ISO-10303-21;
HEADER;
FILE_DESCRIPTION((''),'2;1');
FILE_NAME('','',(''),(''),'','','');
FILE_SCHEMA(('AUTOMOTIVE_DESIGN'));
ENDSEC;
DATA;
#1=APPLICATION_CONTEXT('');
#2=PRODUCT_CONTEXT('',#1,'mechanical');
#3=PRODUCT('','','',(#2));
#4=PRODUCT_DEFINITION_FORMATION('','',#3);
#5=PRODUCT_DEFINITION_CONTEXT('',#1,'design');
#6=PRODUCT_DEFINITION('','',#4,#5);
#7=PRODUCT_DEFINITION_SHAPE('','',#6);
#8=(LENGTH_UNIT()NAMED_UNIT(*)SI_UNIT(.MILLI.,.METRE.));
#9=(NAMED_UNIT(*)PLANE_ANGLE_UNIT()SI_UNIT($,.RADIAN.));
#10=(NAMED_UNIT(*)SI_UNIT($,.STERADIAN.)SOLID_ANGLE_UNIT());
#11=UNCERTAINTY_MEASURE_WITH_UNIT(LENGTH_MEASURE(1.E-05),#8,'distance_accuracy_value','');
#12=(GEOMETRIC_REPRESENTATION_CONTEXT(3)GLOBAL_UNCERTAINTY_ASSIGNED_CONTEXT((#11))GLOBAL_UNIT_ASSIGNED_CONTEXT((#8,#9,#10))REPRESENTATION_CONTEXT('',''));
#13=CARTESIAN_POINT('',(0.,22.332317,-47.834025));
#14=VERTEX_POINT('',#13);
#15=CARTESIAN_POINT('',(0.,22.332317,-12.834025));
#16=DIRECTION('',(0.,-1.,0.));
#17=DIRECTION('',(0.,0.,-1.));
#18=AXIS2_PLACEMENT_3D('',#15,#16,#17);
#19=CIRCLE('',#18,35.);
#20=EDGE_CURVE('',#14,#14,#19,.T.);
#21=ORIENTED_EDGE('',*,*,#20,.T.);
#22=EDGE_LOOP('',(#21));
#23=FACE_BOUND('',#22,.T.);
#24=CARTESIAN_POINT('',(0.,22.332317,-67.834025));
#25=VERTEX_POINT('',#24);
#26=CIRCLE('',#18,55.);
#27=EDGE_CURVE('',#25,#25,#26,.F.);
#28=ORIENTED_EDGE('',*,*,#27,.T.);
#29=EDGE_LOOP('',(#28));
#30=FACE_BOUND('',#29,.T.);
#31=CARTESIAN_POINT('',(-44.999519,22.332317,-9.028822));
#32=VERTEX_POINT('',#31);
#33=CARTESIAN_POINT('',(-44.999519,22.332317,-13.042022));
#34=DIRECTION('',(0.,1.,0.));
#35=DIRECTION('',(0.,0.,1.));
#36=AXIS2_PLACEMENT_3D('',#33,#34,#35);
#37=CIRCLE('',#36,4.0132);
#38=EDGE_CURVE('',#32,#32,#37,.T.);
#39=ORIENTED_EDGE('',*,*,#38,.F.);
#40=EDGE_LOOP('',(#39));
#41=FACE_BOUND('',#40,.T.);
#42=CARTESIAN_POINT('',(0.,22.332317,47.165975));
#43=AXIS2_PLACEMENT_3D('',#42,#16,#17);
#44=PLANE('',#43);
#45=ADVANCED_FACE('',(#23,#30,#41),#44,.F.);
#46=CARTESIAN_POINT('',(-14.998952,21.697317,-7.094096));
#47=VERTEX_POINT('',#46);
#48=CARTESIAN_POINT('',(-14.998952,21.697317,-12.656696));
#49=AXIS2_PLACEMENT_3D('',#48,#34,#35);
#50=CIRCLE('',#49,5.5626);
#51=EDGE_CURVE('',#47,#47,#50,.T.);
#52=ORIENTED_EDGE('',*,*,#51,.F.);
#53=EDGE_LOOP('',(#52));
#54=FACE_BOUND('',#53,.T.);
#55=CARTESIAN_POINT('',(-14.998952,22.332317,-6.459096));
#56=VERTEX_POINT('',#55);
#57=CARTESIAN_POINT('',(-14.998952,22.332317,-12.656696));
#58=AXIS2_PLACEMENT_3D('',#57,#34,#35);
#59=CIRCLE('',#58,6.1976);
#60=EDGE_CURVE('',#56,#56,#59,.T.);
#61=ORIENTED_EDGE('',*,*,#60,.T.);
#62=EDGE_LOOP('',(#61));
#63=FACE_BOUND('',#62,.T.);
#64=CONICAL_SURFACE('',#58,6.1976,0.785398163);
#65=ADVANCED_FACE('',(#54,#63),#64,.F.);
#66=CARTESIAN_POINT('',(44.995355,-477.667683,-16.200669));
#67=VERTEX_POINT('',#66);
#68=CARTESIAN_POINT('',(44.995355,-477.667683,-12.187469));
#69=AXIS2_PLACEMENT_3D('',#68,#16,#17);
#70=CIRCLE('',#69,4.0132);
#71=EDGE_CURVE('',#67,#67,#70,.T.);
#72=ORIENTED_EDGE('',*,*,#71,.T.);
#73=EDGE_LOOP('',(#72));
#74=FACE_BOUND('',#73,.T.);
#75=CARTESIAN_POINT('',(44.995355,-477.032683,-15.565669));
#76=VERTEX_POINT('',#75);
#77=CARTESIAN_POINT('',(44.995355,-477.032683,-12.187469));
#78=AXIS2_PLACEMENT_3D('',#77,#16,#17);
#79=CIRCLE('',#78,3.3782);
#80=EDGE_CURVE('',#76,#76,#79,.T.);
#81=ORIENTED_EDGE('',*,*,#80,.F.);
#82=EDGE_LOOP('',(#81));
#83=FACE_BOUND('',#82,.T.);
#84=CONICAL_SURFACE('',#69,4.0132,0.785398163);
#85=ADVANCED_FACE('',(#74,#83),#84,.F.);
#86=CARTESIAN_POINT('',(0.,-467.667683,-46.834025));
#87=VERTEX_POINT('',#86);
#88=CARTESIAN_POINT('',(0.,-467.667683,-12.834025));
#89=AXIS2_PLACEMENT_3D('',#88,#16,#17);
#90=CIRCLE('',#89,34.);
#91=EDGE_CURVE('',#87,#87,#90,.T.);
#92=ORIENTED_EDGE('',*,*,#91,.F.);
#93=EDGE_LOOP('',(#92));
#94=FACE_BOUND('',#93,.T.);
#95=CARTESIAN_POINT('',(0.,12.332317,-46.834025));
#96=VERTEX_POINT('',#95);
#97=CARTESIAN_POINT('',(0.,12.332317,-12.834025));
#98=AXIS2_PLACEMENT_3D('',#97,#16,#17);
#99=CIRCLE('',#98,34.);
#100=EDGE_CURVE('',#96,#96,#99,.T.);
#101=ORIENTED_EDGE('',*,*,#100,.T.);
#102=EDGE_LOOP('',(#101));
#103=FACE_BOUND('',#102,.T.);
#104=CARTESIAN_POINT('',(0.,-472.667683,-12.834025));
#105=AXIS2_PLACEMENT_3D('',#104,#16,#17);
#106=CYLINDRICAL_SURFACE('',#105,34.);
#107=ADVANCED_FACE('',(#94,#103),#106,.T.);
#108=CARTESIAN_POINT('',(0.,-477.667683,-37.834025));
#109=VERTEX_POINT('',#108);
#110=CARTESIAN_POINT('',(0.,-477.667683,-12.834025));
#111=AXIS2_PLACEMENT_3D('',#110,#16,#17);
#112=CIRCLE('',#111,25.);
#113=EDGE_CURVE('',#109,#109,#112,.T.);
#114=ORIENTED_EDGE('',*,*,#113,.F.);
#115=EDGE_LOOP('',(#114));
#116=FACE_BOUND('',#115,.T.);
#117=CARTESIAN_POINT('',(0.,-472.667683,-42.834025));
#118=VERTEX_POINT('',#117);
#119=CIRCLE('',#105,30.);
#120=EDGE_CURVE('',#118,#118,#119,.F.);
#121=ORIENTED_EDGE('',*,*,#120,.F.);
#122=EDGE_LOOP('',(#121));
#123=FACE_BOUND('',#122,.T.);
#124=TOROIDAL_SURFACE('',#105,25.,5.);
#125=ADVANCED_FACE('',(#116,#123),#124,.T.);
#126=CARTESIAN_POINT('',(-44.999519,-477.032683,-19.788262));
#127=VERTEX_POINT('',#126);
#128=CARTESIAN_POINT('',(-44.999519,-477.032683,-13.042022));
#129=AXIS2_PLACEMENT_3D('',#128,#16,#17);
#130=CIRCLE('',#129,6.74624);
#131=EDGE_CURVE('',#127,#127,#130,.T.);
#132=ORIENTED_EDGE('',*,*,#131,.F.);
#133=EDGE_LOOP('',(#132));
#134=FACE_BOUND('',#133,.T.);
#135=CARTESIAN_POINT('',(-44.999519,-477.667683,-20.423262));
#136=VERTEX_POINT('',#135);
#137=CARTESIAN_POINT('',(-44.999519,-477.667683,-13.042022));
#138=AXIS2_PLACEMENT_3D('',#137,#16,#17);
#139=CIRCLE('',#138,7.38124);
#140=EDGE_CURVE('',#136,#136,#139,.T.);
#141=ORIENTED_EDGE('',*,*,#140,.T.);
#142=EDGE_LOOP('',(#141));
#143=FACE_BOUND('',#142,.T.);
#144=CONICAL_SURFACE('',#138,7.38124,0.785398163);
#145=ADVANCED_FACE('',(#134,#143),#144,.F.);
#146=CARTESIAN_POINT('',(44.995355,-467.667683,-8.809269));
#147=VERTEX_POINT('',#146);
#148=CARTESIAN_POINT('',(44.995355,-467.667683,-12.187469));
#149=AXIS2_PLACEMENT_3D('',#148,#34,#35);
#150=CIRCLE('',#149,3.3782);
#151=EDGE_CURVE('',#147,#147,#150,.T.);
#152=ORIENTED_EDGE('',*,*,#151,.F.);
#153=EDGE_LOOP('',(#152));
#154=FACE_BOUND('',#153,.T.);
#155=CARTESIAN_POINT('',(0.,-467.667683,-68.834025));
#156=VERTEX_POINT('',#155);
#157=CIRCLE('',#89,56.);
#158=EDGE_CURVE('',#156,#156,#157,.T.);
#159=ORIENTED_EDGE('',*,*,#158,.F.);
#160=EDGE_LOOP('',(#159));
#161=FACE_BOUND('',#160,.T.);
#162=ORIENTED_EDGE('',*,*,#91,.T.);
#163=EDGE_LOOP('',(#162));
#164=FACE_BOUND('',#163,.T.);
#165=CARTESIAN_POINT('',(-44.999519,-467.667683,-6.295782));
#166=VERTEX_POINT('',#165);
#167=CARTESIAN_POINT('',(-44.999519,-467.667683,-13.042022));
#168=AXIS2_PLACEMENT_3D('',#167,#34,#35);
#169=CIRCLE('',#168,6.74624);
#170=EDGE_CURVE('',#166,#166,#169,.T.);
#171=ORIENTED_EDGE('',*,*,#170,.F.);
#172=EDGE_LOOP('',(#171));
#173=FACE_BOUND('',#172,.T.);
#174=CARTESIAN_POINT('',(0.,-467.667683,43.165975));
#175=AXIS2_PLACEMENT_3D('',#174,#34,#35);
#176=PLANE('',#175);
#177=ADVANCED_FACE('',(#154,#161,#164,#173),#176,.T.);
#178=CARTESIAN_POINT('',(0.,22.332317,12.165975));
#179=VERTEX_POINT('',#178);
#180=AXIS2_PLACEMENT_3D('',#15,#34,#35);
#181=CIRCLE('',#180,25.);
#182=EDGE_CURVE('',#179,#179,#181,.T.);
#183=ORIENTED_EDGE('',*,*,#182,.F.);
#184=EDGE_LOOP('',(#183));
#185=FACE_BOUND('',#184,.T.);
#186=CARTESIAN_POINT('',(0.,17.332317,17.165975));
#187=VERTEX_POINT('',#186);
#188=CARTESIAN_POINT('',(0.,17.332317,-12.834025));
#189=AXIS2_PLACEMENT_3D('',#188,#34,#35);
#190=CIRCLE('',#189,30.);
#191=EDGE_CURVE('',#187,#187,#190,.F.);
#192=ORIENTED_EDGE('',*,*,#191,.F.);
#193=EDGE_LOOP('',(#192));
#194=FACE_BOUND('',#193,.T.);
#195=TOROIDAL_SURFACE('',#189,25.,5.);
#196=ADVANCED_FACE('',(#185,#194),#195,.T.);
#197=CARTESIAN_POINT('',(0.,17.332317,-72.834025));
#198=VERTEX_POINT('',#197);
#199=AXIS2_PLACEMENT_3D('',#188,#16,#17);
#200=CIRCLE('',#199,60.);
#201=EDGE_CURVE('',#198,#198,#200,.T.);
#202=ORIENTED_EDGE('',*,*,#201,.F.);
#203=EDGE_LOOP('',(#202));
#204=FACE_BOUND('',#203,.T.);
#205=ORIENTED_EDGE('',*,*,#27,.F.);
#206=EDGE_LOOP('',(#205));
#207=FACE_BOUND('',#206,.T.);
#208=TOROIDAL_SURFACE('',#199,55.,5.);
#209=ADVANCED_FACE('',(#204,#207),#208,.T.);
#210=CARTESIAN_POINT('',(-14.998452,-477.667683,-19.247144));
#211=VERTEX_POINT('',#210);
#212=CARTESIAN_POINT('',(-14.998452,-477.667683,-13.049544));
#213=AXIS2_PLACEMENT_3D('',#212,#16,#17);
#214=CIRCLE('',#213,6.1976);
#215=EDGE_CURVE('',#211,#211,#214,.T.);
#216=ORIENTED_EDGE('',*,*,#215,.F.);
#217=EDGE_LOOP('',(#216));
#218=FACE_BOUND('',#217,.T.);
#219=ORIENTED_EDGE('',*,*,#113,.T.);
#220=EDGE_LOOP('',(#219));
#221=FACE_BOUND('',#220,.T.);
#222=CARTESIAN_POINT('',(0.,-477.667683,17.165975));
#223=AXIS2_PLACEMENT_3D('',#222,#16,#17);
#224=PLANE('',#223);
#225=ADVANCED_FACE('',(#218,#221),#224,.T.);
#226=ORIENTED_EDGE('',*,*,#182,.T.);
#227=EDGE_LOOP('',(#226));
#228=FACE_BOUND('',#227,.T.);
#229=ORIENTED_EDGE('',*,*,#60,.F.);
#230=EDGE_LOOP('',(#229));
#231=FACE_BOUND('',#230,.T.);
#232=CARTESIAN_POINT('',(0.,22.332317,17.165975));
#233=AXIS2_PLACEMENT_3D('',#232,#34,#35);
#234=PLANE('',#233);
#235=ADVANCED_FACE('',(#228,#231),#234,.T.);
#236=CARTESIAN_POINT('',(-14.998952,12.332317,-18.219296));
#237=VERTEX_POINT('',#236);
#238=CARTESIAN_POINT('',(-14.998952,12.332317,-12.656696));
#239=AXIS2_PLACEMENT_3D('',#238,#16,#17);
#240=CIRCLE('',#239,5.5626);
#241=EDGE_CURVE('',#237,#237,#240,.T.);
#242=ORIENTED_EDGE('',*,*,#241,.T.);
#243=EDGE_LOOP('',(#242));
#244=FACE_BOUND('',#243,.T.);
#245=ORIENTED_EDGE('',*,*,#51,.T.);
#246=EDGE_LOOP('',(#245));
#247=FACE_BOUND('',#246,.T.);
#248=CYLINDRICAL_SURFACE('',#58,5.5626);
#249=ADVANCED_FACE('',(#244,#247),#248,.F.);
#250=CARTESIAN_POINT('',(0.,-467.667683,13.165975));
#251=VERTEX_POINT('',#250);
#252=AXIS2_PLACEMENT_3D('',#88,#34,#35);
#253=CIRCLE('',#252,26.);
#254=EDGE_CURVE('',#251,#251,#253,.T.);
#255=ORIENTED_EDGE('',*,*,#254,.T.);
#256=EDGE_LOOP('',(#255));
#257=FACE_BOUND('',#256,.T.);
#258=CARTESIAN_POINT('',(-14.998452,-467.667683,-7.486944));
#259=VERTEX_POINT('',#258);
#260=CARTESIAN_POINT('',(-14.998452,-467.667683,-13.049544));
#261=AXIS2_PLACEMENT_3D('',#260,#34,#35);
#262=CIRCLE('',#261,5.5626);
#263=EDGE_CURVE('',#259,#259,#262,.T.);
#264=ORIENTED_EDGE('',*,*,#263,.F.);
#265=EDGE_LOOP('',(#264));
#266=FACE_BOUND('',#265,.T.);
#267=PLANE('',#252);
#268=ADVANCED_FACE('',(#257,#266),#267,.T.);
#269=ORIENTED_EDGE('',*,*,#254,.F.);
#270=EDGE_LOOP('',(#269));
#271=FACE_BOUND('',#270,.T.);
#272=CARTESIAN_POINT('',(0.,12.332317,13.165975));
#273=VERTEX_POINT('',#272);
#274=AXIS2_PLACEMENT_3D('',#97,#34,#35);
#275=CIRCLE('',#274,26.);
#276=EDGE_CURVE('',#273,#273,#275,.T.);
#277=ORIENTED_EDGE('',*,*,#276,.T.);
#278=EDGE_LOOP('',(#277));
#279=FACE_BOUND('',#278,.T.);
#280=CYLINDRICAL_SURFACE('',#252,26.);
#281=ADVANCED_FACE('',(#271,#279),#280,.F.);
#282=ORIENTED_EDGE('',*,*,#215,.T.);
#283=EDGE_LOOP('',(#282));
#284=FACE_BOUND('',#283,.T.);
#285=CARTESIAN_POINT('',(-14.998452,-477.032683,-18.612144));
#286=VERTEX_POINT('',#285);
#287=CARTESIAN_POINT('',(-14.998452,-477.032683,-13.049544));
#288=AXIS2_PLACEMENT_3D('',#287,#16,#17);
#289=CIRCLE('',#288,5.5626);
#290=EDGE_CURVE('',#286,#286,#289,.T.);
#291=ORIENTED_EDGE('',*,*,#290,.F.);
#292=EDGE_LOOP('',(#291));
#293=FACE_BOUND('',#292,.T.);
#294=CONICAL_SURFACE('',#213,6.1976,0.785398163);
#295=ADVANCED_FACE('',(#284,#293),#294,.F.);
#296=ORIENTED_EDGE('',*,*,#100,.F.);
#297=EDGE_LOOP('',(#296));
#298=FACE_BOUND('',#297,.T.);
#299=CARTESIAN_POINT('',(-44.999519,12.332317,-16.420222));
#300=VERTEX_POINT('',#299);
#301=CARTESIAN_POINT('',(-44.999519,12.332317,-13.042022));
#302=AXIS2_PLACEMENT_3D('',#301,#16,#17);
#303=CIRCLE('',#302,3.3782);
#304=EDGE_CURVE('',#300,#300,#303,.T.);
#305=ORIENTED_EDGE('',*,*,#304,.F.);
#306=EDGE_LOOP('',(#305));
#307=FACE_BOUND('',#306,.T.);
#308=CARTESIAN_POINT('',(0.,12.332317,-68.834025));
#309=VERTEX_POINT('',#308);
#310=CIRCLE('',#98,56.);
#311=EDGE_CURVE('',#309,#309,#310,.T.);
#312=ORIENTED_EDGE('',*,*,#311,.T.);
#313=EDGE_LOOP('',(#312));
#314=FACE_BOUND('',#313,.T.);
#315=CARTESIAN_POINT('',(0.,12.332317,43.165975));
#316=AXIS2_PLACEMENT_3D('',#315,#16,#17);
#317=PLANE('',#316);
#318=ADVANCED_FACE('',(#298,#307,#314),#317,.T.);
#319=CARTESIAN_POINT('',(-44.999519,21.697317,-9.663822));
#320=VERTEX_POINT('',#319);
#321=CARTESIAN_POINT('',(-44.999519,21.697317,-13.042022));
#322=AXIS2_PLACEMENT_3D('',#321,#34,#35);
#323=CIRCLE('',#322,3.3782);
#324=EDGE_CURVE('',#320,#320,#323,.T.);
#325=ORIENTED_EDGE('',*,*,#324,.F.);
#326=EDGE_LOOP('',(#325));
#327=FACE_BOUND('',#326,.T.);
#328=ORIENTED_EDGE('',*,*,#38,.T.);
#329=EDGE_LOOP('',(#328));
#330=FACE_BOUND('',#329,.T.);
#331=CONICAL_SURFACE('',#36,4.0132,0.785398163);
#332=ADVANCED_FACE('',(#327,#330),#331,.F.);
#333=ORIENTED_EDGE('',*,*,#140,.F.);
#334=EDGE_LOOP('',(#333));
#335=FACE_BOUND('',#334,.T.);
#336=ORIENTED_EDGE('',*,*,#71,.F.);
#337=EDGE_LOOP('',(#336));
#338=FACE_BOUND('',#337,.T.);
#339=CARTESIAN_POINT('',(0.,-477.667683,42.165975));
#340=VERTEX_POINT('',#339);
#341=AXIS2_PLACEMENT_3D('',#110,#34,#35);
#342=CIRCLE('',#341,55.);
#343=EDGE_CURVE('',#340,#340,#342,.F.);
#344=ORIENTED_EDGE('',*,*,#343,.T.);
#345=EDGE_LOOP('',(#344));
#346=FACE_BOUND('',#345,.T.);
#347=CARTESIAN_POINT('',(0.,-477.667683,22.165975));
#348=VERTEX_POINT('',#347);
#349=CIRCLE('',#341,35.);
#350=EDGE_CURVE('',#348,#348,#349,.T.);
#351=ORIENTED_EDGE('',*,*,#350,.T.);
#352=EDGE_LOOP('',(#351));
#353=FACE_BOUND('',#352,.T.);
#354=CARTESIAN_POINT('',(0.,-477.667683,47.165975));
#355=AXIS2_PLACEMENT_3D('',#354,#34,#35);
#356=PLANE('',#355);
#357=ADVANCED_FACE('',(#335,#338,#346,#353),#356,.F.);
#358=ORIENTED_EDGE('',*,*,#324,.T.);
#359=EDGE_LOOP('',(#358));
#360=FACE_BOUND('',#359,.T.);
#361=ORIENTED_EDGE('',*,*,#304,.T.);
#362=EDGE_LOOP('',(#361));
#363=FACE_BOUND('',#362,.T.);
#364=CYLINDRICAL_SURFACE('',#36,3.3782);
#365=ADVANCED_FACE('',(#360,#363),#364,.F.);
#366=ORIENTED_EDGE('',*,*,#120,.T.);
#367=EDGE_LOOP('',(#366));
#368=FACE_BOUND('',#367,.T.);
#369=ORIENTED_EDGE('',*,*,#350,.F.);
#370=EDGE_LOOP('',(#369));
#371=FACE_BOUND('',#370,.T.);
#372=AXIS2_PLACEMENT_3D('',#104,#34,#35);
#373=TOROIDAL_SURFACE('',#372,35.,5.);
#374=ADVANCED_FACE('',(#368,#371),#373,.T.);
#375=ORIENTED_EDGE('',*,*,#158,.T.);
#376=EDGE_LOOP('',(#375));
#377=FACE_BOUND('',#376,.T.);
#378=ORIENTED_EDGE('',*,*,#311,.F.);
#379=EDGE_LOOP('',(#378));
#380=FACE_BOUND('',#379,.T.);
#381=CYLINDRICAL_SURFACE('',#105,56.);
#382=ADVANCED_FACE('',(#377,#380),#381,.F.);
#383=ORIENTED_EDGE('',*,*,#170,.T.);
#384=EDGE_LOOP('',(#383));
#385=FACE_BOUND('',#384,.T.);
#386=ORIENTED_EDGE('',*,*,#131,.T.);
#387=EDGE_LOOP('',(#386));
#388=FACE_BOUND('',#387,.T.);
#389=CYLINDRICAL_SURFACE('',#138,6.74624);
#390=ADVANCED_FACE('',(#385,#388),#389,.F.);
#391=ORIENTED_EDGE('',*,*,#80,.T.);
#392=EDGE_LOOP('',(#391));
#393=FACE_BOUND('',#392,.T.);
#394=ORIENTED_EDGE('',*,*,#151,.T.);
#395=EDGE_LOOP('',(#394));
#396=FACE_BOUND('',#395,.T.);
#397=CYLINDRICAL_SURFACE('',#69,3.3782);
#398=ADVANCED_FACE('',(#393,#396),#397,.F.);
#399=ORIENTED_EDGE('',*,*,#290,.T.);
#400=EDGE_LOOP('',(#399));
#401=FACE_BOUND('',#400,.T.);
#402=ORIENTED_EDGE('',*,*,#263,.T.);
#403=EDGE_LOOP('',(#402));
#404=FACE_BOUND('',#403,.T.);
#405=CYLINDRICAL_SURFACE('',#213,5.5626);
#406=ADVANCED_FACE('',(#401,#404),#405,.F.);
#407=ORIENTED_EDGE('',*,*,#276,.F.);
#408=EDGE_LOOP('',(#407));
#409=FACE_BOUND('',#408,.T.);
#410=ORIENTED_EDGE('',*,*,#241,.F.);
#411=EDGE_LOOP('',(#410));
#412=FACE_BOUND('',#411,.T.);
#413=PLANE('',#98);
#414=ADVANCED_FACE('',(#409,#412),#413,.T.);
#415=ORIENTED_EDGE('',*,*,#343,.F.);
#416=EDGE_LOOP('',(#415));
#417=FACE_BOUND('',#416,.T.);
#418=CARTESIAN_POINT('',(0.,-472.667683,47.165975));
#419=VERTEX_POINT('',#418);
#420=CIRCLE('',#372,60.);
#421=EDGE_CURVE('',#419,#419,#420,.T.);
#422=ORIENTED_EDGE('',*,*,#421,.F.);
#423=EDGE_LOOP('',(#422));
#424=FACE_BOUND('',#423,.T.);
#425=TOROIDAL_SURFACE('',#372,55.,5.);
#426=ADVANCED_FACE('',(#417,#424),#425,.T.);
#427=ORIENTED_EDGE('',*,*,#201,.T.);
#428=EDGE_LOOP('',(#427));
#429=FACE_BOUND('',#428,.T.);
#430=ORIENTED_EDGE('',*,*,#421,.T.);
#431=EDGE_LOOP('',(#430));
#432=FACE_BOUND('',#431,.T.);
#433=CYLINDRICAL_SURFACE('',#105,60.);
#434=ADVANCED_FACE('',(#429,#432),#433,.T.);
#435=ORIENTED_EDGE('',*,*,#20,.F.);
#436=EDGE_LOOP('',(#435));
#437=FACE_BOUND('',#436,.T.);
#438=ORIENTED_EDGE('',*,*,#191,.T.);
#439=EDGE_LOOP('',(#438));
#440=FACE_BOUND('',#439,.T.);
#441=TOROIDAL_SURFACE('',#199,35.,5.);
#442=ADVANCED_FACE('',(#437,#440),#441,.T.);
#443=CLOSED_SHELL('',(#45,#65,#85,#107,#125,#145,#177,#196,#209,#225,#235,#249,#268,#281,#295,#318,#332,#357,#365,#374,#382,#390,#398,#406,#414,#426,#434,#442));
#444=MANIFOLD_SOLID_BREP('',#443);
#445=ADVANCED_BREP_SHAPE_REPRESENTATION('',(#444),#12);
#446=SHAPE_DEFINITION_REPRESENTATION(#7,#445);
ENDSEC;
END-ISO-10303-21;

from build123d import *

# Parameters (mm, degrees)
CONG_1_R                                            = 5
CONG_2_R                                            = 5
ESQUISSE3_W                                         = 30
ESQUISSE3_H                                         = 500
ESQUISSE3_W_2                                       = 22
ESQUISSE3_H_2                                       = 480
CONG_3_R                                            = 5
CONG_4_R                                            = 5
PER_AGE_POUR_TUYAU_POUR_TROU_TARAUD_1_4_D           = 11.1252
PER_AGE_POUR_TUYAU_POUR_TROU_TARAUD_1_4_DEPTH       = 10
PER_AGE_POUR_TUYAU_POUR_TROU_TARAUD_1_4_CSINK_D     = 12.3952
PER_AGE_POUR_TUYAU_POUR_TROU_TARAUD_1_4_CSINK_ANGLE = 90
D_GAGEMENT_1_21_D                                   = 13.49248
D_GAGEMENT_1_21_DEPTH                               = 10
D_GAGEMENT_1_21_CSINK_D                             = 14.76248
D_GAGEMENT_1_21_CSINK_ANGLE                         = 90
PER_AGE_POUR_TUYAU_POUR_TROU_TARAUD_2_D             = 11.1252
PER_AGE_POUR_TUYAU_POUR_TROU_TARAUD_2_DEPTH         = 10
PER_AGE_POUR_TUYAU_POUR_TROU_TARAUD_2_CSINK_D       = 12.3952
PER_AGE_POUR_TUYAU_POUR_TROU_TARAUD_2_CSINK_ANGLE   = 90
D_GAGEMENT_1_42_D                                   = 6.7564
D_GAGEMENT_1_42_CSINK_D                             = 8.0264
D_GAGEMENT_1_42_CSINK_ANGLE                         = 90
D_GAGEMENT_1_43_D                                   = 6.7564
D_GAGEMENT_1_43_DEPTH                               = 10
D_GAGEMENT_1_43_CSINK_D                             = 8.0264
D_GAGEMENT_1_43_CSINK_ANGLE                         = 90


with BuildPart() as part:
    # Esquisse2 → Révolution1 (revolve)
    with BuildSketch(Plane(origin=(0, 0, 0), x_dir=(0, 0, -1), z_dir=(1, 0, 0))):
        Polygon((12.834024955, -467.667682927), (12.834024955, -477.667682927), (-17.165975045, -477.667682927), (-17.165975045, 22.332317073), (12.834024955, 22.332317073), (12.834024955, 12.332317073), (-13.165975045, 12.332317073), (-13.165975045, -467.667682927), align=None)
    revolve(axis=Axis((0, -467.667682927, -12.834024955), (0, -1, 0)))

    # Congé1
    cong_1_edges = [part.edges().sort_by_distance(p)[0] for p in [
        (0, 22.332317073, -42.834024955),
    ]]
    fillet(cong_1_edges, radius=CONG_1_R)

    # Congé2
    cong_2_edges = [part.edges().sort_by_distance(p)[0] for p in [
        (0, -477.667682927, -42.834024955),
    ]]
    fillet(cong_2_edges, radius=CONG_2_R)

    # Esquisse3 → Révolution2 (revolve)
    with BuildSketch(Plane(origin=(0, 0, 0), x_dir=(0, 0, -1), z_dir=(1, 0, 0)), mode=Mode.PRIVATE) as r_volution2_sk:
        with Locations((-32.165975045, -227.667682927)):
            Rectangle(ESQUISSE3_W, ESQUISSE3_H)
        with Locations((-32.165975045, -227.667682927)):
            Rectangle(ESQUISSE3_W_2, ESQUISSE3_H_2, mode=Mode.SUBTRACT)
    revolve(r_volution2_sk.sketch.rotate(Axis((0, -472.667682927, -12.834024955), (0, 1, 0)), 180), axis=Axis((0, -472.667682927, -12.834024955), (0, 1, 0)))

    # Congé3
    cong_3_edges = [part.edges().sort_by_distance(p)[0] for p in [
        (0, 22.332317073, 47.165975045),
        (0, 22.332317073, 17.165975045),
    ]]
    fillet(cong_3_edges, radius=CONG_3_R - 0.0001)  # a hair under: the kernel refuses the full size

    # Congé4
    cong_4_edges = [part.edges().sort_by_distance(p)[0] for p in [
        (0, -477.667682927, 17.165975045),
        (0, -477.667682927, 47.165975045),
    ]]
    fillet(cong_4_edges, radius=CONG_4_R - 0.0001)  # a hair under: the kernel refuses the full size

    # Per_age pour tuyau pour trou taraud_ 1_4
    with Locations(Plane(origin=(-14.998951778, 22.332317073, -12.656696011), x_dir=(0, 0, 1), z_dir=(0, 1, 0))):
        with Locations((0, 0)):
            CounterSinkHole(PER_AGE_POUR_TUYAU_POUR_TROU_TARAUD_1_4_D / 2, PER_AGE_POUR_TUYAU_POUR_TROU_TARAUD_1_4_CSINK_D / 2, depth=PER_AGE_POUR_TUYAU_POUR_TROU_TARAUD_1_4_DEPTH, counter_sink_angle=PER_AGE_POUR_TUYAU_POUR_TROU_TARAUD_1_4_CSINK_ANGLE)

    # Dégagement 1/21
    with Locations(Plane(origin=(-44.999519302, -477.667682927, -13.042021564), x_dir=(0, 0, -1), z_dir=(0, -1, 0))):
        with Locations((0, 0)):
            CounterSinkHole(D_GAGEMENT_1_21_D / 2, D_GAGEMENT_1_21_CSINK_D / 2, depth=D_GAGEMENT_1_21_DEPTH, counter_sink_angle=D_GAGEMENT_1_21_CSINK_ANGLE)

    # Per_age pour tuyau pour trou taraud_ 2
    with Locations(Plane(origin=(0, -477.667682927, 0), x_dir=(-1, 0, 0), z_dir=(0, -1, 0))):
        with Locations((14.998451643, 13.049543658)):
            CounterSinkHole(PER_AGE_POUR_TUYAU_POUR_TROU_TARAUD_2_D / 2, PER_AGE_POUR_TUYAU_POUR_TROU_TARAUD_2_CSINK_D / 2, depth=PER_AGE_POUR_TUYAU_POUR_TROU_TARAUD_2_DEPTH, counter_sink_angle=PER_AGE_POUR_TUYAU_POUR_TROU_TARAUD_2_CSINK_ANGLE)

    # Dégagement 1/42 (through all)
    with Locations(Plane(origin=(0, 22.332317073, 0), x_dir=(1, 0, 0), z_dir=(0, 1, 0))):
        with Locations((-44.999519302, 13.042021564)):
            CounterSinkHole(D_GAGEMENT_1_42_D / 2, D_GAGEMENT_1_42_CSINK_D / 2, counter_sink_angle=D_GAGEMENT_1_42_CSINK_ANGLE)

    # Dégagement 1/43
    with Locations(Plane(origin=(0, -477.667682927, 0), x_dir=(-1, 0, 0), z_dir=(0, -1, 0))):
        with Locations((-44.995354929, 12.187468846)):
            CounterSinkHole(D_GAGEMENT_1_43_D / 2, D_GAGEMENT_1_43_CSINK_D / 2, depth=D_GAGEMENT_1_43_DEPTH, counter_sink_angle=D_GAGEMENT_1_43_CSINK_ANGLE)


solid = part.part
